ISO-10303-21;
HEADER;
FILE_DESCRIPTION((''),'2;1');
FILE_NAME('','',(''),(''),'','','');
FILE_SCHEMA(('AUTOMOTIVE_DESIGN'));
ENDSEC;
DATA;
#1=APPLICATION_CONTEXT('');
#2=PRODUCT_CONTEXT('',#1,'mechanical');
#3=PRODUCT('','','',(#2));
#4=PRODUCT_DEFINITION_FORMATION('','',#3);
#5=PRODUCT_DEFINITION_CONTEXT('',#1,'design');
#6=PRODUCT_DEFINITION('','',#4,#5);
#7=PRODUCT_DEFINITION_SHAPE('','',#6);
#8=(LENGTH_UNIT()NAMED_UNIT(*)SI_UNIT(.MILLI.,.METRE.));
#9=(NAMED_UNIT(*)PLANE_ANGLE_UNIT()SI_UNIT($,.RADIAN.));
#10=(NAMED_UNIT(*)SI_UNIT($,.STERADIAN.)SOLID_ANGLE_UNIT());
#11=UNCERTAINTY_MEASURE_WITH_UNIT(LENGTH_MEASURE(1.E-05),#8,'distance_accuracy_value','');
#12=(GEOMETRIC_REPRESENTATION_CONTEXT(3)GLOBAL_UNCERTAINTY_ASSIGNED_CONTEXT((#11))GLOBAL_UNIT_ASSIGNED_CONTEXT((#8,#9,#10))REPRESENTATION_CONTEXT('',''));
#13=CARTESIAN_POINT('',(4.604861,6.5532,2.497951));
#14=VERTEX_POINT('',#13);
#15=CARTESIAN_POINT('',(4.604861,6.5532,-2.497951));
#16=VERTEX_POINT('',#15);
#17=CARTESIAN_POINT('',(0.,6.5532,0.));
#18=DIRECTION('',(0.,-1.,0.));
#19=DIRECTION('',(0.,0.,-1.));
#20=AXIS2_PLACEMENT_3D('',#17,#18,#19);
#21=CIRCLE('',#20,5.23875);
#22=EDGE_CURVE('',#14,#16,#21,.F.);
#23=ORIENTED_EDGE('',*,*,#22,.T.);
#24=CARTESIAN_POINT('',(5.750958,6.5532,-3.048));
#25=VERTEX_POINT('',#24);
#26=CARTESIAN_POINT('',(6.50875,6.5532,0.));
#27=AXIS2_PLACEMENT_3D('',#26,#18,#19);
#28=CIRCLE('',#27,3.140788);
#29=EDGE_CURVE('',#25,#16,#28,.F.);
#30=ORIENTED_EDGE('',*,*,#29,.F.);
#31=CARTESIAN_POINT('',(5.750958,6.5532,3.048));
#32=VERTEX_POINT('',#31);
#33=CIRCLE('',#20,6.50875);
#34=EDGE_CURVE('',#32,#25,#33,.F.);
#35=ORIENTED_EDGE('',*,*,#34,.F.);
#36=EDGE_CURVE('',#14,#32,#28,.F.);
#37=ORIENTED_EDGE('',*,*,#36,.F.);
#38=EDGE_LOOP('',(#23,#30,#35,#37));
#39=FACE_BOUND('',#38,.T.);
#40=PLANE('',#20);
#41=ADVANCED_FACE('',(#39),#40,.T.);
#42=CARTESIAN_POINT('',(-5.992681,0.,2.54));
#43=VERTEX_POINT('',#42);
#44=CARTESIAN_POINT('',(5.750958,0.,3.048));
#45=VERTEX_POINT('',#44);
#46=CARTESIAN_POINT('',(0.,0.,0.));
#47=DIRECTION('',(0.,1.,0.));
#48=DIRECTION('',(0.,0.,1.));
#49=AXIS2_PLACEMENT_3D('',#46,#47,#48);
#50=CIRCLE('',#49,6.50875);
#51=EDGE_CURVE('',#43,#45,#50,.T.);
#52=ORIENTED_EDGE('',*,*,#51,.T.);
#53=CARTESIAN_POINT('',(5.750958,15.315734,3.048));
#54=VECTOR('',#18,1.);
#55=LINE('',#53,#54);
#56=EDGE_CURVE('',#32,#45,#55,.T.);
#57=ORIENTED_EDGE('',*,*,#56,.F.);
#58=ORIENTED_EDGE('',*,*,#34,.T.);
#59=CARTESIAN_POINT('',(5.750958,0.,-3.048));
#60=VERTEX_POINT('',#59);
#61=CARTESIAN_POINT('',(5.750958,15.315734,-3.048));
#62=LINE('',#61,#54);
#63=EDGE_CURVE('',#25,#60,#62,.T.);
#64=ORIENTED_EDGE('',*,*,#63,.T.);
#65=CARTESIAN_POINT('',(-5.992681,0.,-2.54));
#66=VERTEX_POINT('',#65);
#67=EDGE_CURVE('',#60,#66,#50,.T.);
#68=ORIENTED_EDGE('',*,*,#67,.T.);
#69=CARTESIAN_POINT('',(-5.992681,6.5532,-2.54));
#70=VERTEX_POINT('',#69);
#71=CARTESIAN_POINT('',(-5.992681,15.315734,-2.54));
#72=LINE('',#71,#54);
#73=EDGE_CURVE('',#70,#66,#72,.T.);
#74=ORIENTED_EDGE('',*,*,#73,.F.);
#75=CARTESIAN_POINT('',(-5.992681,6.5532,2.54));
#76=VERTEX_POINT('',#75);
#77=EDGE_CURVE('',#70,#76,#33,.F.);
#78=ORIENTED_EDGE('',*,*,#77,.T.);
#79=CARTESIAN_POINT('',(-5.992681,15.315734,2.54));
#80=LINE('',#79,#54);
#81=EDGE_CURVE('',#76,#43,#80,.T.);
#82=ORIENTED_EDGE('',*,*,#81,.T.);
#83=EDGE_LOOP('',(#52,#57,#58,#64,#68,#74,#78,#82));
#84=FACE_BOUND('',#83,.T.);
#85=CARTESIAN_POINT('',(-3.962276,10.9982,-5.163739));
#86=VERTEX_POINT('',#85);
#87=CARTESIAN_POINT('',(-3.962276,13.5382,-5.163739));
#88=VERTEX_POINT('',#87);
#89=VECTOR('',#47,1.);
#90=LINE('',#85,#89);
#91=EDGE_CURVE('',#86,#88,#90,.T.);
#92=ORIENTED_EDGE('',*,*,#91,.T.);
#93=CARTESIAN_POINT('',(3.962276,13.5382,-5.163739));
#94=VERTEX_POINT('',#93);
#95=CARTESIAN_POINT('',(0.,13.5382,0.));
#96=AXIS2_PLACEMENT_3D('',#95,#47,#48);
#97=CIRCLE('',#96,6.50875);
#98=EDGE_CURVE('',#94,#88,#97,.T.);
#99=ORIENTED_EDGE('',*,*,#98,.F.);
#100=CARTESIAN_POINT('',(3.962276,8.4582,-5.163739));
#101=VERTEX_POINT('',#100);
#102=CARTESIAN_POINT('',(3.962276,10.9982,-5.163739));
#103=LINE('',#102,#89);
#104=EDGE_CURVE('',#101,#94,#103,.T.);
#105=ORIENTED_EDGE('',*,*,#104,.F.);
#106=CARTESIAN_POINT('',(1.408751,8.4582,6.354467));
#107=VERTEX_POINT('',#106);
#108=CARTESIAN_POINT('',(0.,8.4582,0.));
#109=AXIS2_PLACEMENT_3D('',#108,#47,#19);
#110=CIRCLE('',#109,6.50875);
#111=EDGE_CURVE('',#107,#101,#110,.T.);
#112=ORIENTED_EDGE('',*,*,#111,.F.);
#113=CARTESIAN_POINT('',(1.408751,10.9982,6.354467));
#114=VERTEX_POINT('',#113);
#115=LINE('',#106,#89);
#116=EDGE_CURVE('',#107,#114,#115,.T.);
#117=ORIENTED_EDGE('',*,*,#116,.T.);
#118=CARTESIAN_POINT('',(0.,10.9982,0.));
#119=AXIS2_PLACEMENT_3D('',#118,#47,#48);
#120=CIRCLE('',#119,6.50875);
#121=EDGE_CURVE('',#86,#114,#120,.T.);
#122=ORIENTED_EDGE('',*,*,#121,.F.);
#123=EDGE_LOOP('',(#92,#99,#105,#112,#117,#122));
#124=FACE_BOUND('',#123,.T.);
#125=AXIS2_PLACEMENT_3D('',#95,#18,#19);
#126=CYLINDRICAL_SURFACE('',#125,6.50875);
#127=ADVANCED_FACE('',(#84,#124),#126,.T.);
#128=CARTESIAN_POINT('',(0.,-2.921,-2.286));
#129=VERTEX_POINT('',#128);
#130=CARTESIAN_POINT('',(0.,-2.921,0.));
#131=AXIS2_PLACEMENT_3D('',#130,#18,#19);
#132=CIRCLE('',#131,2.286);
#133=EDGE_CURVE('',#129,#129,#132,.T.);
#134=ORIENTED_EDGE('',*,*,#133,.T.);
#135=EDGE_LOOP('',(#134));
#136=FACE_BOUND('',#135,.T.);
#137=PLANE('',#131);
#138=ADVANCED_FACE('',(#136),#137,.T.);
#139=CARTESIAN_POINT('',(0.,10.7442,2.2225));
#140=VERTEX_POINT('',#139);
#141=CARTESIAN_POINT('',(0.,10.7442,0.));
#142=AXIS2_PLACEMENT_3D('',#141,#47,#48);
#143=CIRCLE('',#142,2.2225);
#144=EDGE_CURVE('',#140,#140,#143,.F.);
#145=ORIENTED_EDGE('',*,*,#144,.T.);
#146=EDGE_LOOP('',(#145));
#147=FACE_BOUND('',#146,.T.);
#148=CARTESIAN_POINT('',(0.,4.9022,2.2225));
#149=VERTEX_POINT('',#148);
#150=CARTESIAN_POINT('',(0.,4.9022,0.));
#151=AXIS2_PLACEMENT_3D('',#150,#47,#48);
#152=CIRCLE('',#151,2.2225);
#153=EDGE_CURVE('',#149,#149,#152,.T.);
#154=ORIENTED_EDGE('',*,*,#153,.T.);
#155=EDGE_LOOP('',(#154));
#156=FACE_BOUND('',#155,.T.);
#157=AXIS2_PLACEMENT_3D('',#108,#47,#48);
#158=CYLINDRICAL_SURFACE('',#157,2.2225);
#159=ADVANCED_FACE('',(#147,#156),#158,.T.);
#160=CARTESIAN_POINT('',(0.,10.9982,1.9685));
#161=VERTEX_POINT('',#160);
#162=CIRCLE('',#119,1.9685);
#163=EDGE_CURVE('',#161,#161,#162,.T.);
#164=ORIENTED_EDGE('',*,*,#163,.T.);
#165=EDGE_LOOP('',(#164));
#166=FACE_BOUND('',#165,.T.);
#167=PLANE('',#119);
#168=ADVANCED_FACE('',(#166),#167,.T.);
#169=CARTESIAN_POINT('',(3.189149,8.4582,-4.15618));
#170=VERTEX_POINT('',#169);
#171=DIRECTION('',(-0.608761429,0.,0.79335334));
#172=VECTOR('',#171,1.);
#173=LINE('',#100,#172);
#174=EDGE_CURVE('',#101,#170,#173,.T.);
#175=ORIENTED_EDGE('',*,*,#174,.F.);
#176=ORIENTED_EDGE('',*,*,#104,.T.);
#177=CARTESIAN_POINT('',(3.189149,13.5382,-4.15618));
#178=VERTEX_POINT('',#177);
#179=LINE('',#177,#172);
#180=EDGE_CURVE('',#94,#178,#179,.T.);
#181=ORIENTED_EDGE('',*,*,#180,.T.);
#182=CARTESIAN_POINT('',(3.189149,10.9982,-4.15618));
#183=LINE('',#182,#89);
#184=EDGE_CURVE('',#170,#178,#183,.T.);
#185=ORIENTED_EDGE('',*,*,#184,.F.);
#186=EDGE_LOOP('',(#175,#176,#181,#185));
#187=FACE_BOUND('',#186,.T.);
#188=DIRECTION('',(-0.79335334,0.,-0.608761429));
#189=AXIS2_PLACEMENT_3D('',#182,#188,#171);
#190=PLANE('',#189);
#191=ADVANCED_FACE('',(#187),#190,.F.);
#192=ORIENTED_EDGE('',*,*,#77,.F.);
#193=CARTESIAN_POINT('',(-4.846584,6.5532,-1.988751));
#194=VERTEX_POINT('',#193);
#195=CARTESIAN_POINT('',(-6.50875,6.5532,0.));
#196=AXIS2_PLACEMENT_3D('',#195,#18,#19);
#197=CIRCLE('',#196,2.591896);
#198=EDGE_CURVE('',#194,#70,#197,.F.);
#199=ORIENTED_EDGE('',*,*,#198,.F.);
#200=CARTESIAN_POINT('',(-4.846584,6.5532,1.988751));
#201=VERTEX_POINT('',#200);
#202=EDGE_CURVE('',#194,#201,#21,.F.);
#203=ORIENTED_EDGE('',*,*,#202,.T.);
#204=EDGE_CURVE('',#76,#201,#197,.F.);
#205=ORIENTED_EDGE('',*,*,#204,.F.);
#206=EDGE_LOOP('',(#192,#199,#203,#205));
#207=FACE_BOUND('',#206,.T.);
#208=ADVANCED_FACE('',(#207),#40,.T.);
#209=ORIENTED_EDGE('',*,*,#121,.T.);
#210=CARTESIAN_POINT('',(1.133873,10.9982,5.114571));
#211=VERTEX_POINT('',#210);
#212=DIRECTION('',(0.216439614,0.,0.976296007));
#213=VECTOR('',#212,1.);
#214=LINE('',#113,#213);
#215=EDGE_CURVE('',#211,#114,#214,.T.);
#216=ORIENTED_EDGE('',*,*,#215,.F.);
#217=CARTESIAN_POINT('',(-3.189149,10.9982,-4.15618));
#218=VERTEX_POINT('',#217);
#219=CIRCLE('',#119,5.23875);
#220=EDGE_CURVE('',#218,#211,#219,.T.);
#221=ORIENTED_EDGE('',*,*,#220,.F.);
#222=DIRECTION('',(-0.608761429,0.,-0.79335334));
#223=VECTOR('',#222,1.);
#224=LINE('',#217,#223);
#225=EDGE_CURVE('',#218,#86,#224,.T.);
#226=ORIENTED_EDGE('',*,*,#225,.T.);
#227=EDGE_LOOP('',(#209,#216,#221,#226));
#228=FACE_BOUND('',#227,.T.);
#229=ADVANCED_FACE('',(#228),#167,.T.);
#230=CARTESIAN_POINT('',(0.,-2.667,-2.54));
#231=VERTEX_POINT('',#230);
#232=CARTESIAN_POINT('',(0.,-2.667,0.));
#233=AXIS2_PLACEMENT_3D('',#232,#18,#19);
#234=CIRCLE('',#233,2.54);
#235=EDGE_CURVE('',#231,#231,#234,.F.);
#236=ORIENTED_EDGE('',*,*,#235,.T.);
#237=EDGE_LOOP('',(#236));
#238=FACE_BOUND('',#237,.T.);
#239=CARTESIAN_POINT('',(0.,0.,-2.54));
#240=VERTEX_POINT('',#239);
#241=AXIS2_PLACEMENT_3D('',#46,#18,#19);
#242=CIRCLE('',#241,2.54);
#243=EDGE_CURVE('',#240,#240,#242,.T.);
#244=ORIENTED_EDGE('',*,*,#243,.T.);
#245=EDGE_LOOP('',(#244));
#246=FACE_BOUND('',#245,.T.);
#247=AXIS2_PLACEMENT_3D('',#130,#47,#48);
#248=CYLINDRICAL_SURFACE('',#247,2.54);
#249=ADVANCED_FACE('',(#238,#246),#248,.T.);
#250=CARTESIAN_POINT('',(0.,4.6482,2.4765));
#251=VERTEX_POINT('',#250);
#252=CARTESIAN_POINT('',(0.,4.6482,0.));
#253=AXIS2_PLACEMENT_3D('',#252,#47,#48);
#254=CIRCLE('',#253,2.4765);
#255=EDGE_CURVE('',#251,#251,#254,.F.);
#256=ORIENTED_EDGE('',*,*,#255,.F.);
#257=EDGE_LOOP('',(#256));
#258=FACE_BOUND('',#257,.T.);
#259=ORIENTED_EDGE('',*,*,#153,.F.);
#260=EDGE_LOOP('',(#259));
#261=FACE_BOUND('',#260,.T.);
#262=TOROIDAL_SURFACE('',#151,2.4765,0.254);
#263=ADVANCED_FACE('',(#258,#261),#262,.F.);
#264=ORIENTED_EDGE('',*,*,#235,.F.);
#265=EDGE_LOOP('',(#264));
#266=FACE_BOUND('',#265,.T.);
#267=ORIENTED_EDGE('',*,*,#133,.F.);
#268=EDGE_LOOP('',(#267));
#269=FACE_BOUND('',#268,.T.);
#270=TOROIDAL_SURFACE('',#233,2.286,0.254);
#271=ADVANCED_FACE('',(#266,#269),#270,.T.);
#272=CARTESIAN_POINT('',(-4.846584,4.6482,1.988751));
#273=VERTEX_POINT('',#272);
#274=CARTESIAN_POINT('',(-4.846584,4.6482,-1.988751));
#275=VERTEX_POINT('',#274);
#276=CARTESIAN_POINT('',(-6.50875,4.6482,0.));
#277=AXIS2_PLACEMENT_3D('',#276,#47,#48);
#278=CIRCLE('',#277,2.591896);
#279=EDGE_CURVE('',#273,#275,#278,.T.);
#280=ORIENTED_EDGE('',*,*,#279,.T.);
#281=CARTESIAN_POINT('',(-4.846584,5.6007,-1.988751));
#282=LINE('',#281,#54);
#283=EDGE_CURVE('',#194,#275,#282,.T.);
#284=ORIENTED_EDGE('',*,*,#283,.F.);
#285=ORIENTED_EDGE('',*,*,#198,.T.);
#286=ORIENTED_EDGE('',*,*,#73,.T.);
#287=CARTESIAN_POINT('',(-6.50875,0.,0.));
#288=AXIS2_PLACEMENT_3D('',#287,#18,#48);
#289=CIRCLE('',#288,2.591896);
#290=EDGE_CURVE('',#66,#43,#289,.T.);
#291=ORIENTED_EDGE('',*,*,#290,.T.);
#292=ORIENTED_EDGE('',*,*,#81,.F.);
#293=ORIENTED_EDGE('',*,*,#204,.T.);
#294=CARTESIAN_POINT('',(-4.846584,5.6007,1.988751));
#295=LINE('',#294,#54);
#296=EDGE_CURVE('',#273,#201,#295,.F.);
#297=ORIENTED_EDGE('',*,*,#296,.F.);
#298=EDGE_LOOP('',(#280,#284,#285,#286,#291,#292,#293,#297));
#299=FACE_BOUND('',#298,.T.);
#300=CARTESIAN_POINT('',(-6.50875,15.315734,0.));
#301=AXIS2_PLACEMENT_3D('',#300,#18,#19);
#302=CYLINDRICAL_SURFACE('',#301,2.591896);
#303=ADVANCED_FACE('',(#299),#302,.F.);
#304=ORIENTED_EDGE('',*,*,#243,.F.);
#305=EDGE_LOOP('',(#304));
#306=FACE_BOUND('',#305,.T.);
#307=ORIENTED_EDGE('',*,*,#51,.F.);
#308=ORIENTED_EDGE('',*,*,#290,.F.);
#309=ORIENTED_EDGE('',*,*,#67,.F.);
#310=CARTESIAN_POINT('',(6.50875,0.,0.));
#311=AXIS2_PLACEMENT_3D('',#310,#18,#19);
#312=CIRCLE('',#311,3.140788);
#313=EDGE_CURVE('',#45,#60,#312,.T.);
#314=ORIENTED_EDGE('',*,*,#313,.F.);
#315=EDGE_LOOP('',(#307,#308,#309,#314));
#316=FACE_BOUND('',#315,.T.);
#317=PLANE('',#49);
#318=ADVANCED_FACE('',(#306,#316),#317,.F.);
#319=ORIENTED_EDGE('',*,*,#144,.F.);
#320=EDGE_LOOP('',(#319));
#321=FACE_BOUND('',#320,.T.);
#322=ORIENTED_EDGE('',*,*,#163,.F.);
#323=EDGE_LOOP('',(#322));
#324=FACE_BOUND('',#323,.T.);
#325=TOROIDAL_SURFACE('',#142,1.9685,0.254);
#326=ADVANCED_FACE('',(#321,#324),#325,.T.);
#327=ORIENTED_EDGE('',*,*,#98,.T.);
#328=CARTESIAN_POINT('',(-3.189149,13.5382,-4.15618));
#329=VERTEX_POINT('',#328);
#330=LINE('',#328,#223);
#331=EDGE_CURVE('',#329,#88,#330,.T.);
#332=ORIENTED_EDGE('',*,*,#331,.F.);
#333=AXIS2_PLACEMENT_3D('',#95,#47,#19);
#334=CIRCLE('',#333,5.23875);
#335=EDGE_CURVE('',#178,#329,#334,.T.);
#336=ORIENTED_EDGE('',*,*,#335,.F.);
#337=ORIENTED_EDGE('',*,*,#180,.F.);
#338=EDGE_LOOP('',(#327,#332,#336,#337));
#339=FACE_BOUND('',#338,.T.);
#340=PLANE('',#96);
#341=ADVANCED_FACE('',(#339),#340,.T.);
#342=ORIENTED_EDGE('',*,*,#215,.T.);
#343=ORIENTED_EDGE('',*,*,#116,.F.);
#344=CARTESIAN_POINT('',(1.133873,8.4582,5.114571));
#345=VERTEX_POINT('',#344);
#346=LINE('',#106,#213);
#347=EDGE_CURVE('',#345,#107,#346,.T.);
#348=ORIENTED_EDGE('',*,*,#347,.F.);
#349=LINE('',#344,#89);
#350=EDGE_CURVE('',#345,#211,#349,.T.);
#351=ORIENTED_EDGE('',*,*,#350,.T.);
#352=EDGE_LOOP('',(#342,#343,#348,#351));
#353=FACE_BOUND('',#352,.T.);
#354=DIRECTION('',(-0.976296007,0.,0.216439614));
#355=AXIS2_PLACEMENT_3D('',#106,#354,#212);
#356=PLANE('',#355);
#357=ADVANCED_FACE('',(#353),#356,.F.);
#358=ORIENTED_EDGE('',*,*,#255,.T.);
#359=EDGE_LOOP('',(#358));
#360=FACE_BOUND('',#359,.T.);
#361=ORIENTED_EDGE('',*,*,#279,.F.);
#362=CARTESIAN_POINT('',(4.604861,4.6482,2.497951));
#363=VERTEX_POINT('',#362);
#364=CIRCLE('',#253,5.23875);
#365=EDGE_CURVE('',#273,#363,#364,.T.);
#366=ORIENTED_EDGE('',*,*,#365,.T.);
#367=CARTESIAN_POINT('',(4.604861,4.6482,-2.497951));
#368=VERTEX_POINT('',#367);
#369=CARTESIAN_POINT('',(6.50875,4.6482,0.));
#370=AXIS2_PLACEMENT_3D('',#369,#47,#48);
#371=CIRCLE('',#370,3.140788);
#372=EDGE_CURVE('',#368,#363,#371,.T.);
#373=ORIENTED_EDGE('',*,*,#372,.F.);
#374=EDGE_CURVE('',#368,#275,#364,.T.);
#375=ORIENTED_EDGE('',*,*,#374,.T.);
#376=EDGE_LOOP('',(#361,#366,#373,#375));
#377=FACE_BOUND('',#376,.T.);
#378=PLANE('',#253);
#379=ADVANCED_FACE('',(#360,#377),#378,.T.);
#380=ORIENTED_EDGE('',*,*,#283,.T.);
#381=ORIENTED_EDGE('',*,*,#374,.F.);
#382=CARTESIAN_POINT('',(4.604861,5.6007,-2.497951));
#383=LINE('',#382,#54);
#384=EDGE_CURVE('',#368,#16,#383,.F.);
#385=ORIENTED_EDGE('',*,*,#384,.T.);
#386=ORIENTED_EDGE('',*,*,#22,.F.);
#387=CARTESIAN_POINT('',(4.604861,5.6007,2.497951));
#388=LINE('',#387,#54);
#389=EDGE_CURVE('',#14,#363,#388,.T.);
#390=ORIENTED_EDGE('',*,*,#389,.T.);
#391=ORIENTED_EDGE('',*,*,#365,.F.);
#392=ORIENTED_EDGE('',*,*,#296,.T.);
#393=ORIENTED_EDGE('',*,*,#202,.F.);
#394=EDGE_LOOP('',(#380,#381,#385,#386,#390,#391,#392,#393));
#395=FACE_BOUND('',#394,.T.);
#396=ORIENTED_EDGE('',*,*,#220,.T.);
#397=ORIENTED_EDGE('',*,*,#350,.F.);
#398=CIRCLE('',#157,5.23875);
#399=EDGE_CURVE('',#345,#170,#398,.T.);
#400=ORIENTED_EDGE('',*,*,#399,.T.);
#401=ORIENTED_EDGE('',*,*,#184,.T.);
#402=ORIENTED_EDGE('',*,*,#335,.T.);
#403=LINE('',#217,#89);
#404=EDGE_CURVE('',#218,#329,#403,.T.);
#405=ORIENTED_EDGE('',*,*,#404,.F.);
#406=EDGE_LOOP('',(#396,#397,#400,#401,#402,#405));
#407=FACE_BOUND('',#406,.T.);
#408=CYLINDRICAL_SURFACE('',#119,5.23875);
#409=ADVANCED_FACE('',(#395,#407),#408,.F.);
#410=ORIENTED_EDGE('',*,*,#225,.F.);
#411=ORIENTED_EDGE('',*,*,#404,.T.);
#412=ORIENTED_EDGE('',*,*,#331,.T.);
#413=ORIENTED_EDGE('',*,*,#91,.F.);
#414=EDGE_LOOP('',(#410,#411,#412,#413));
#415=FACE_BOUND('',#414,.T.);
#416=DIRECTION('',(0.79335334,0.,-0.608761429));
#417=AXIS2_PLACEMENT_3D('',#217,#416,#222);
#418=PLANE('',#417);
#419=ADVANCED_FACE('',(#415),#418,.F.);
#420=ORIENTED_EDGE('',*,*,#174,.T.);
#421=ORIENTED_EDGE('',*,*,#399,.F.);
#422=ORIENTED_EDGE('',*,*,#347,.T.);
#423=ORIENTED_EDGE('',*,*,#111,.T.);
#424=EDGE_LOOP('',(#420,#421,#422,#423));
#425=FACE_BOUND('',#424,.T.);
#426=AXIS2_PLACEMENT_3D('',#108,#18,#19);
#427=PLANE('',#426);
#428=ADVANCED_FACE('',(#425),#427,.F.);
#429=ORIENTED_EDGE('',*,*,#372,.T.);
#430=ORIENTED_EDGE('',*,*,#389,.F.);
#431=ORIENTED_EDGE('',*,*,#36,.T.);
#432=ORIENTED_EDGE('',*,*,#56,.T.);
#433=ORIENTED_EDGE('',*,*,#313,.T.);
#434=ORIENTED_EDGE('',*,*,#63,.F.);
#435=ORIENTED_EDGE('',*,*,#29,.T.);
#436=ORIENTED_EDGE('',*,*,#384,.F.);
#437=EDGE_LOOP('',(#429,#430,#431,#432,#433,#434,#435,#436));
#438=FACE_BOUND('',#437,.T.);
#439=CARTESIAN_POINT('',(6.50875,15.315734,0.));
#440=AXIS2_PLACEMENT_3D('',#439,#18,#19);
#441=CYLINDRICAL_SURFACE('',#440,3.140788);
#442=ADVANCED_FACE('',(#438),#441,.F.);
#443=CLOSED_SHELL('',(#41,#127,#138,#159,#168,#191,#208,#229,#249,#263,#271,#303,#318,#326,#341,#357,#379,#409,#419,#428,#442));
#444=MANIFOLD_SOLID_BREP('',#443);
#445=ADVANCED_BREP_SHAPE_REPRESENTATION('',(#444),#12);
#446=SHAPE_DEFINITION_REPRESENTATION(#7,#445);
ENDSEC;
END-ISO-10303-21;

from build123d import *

# Parameters (mm, degrees)
SKETCH1_R           = 6.50875
BOSS_EXTRUDE1_DEPTH = 13.5382
SKETCH2_R           = 2.54
BOSS_EXTRUDE2_DEPTH = 2.921
CUT_EXTRUDE1_START  = -2.54
CUT_EXTRUDE1_DEPTH  = 2.54
CUT_EXTRUDE2_START  = -2.54
SKETCH4_R           = 2.2225
CUT_EXTRUDE2_DEPTH  = 2.54
CUT_EXTRUDE3_START  = -3.81
SKETCH5_R           = 5.23875
SKETCH5_R_2         = 2.2225
CUT_EXTRUDE3_DEPTH  = 3.81
CUT_EXTRUDE4_DEPTH  = 6.5532


with BuildPart() as part:
    # Sketch1 → Boss-Extrude1 (new body)
    with BuildSketch(Plane(origin=(0, 0, 0), x_dir=(1, 0, 0), z_dir=(0, 1, 0))):
        with Locations(Location((0, 0, 0), (0, 0, 270))):
            Circle(SKETCH1_R)
    extrude(amount=BOSS_EXTRUDE1_DEPTH)

    # Sketch2 → Boss-Extrude2 (add)
    with BuildSketch(Plane.XZ):
        with Locations(Location((0, 0, 0), (0, 0, 270))):
            Circle(SKETCH2_R)
    extrude(amount=BOSS_EXTRUDE2_DEPTH)

    # Sketch3 → Cut-Extrude1 (cut)
    with BuildSketch(Plane(origin=(0, 13.5382, 0), x_dir=(1, 0, 0), z_dir=(0, 1, 0)).offset(CUT_EXTRUDE1_START)):
        with BuildLine():
            Line((-3.189148936, 4.156179811), (-3.962275951, 5.163738554))
            ThreePointArc((-3.962275951, 5.163738554), (0, -6.50875), (3.962275951, 5.163738554))
            Line((3.962275951, 5.163738554), (3.189148936, 4.156179811))
            ThreePointArc((3.189148936, 4.156179811), (0, 5.23875), (-3.189148936, 4.156179811))
        make_face()
    extrude(amount=CUT_EXTRUDE1_DEPTH, mode=Mode.SUBTRACT)

    # Sketch4 → Cut-Extrude2 (cut)
    with BuildSketch(Plane(origin=(0, 10.9982, 0), x_dir=(1, 0, 0), z_dir=(0, 1, 0)).offset(CUT_EXTRUDE2_START)):
        with BuildLine():
            Line((3.962275951, 5.163738554), (3.189148936, 4.156179811))
            ThreePointArc((3.189148936, 4.156179811), (-5.114570707, 1.133873028), (1.133873028, -5.114570707))
            Line((1.133873028, -5.114570707), (1.408751337, -6.354466636))
            ThreePointArc((1.408751337, -6.354466636), (6.354466636, -1.408751337), (3.962275951, 5.163738554))
        make_face()
        with Locations(Location((0, 0, 0), (0, 0, 270))):
            Circle(SKETCH4_R, mode=Mode.SUBTRACT)
    extrude(amount=CUT_EXTRUDE2_DEPTH, mode=Mode.SUBTRACT)

    # Sketch5 → Cut-Extrude3 (cut)
    with BuildSketch(Plane(origin=(0, 8.4582, 0), x_dir=(1, 0, 0), z_dir=(0, 1, 0)).offset(CUT_EXTRUDE3_START)):
        with Locations(Location((0, 0, 0), (0, 0, 270))):
            Circle(SKETCH5_R)
        with Locations(Location((0, 0, 0), (0, 0, 270))):
            Circle(SKETCH5_R_2, mode=Mode.SUBTRACT)
    extrude(amount=CUT_EXTRUDE3_DEPTH, mode=Mode.SUBTRACT)

    # Sketch6 → Cut-Extrude4 (cut)
    with BuildSketch(Plane.XZ):
        with BuildLine():
            ThreePointArc((5.750958404, 3.048), (3.367961548, 0), (5.750958404, -3.048))
            ThreePointArc((5.750958404, -3.048), (6.50875, 0), (5.750958404, 3.048))
        make_face()
        with BuildLine():
            ThreePointArc((-5.992681083, 2.54), (-3.916853566, 0), (-5.992681083, -2.54))
            ThreePointArc((-5.992681083, -2.54), (-6.50875, 0), (-5.992681083, 2.54))
        make_face()
    extrude(amount=-CUT_EXTRUDE4_DEPTH, mode=Mode.SUBTRACT)

    # Fillet2: read off the stored shape, not the designer's step
    # Fillet2 outline → Fillet2 (revolve, cut)
    with BuildSketch(Plane.XY):
        with BuildLine():
            ThreePointArc((1.9685, 10.9982), (2.148105122, 10.923805122), (2.2225, 10.7442))
            Line((2.2225, 10.7442), (2.2225, 10.9982))
            Line((2.2225, 10.9982), (1.9685, 10.9982))
        make_face()
        with BuildLine():
            Line((2.54, -2.921), (2.54, -2.667))
            ThreePointArc((2.54, -2.667), (2.465605122, -2.846605122), (2.286, -2.921))
            Line((2.286, -2.921), (2.54, -2.921))
        make_face()
    revolve(axis=Axis((0, 0, 0), (0, 1, 0)), mode=Mode.SUBTRACT)

    # Fillet2 2 outline → Fillet2 2 (revolve)
    with BuildSketch(Plane.XY):
        with BuildLine():
            Line((2.2225, 4.9022), (2.2225, 4.6482))
            Line((2.2225, 4.6482), (2.4765, 4.6482))
            ThreePointArc((2.4765, 4.6482), (2.296894878, 4.722594878), (2.2225, 4.9022))
        make_face()
    revolve(axis=Axis((0, 0, 0), (0, 1, 0)))


solid = part.part
